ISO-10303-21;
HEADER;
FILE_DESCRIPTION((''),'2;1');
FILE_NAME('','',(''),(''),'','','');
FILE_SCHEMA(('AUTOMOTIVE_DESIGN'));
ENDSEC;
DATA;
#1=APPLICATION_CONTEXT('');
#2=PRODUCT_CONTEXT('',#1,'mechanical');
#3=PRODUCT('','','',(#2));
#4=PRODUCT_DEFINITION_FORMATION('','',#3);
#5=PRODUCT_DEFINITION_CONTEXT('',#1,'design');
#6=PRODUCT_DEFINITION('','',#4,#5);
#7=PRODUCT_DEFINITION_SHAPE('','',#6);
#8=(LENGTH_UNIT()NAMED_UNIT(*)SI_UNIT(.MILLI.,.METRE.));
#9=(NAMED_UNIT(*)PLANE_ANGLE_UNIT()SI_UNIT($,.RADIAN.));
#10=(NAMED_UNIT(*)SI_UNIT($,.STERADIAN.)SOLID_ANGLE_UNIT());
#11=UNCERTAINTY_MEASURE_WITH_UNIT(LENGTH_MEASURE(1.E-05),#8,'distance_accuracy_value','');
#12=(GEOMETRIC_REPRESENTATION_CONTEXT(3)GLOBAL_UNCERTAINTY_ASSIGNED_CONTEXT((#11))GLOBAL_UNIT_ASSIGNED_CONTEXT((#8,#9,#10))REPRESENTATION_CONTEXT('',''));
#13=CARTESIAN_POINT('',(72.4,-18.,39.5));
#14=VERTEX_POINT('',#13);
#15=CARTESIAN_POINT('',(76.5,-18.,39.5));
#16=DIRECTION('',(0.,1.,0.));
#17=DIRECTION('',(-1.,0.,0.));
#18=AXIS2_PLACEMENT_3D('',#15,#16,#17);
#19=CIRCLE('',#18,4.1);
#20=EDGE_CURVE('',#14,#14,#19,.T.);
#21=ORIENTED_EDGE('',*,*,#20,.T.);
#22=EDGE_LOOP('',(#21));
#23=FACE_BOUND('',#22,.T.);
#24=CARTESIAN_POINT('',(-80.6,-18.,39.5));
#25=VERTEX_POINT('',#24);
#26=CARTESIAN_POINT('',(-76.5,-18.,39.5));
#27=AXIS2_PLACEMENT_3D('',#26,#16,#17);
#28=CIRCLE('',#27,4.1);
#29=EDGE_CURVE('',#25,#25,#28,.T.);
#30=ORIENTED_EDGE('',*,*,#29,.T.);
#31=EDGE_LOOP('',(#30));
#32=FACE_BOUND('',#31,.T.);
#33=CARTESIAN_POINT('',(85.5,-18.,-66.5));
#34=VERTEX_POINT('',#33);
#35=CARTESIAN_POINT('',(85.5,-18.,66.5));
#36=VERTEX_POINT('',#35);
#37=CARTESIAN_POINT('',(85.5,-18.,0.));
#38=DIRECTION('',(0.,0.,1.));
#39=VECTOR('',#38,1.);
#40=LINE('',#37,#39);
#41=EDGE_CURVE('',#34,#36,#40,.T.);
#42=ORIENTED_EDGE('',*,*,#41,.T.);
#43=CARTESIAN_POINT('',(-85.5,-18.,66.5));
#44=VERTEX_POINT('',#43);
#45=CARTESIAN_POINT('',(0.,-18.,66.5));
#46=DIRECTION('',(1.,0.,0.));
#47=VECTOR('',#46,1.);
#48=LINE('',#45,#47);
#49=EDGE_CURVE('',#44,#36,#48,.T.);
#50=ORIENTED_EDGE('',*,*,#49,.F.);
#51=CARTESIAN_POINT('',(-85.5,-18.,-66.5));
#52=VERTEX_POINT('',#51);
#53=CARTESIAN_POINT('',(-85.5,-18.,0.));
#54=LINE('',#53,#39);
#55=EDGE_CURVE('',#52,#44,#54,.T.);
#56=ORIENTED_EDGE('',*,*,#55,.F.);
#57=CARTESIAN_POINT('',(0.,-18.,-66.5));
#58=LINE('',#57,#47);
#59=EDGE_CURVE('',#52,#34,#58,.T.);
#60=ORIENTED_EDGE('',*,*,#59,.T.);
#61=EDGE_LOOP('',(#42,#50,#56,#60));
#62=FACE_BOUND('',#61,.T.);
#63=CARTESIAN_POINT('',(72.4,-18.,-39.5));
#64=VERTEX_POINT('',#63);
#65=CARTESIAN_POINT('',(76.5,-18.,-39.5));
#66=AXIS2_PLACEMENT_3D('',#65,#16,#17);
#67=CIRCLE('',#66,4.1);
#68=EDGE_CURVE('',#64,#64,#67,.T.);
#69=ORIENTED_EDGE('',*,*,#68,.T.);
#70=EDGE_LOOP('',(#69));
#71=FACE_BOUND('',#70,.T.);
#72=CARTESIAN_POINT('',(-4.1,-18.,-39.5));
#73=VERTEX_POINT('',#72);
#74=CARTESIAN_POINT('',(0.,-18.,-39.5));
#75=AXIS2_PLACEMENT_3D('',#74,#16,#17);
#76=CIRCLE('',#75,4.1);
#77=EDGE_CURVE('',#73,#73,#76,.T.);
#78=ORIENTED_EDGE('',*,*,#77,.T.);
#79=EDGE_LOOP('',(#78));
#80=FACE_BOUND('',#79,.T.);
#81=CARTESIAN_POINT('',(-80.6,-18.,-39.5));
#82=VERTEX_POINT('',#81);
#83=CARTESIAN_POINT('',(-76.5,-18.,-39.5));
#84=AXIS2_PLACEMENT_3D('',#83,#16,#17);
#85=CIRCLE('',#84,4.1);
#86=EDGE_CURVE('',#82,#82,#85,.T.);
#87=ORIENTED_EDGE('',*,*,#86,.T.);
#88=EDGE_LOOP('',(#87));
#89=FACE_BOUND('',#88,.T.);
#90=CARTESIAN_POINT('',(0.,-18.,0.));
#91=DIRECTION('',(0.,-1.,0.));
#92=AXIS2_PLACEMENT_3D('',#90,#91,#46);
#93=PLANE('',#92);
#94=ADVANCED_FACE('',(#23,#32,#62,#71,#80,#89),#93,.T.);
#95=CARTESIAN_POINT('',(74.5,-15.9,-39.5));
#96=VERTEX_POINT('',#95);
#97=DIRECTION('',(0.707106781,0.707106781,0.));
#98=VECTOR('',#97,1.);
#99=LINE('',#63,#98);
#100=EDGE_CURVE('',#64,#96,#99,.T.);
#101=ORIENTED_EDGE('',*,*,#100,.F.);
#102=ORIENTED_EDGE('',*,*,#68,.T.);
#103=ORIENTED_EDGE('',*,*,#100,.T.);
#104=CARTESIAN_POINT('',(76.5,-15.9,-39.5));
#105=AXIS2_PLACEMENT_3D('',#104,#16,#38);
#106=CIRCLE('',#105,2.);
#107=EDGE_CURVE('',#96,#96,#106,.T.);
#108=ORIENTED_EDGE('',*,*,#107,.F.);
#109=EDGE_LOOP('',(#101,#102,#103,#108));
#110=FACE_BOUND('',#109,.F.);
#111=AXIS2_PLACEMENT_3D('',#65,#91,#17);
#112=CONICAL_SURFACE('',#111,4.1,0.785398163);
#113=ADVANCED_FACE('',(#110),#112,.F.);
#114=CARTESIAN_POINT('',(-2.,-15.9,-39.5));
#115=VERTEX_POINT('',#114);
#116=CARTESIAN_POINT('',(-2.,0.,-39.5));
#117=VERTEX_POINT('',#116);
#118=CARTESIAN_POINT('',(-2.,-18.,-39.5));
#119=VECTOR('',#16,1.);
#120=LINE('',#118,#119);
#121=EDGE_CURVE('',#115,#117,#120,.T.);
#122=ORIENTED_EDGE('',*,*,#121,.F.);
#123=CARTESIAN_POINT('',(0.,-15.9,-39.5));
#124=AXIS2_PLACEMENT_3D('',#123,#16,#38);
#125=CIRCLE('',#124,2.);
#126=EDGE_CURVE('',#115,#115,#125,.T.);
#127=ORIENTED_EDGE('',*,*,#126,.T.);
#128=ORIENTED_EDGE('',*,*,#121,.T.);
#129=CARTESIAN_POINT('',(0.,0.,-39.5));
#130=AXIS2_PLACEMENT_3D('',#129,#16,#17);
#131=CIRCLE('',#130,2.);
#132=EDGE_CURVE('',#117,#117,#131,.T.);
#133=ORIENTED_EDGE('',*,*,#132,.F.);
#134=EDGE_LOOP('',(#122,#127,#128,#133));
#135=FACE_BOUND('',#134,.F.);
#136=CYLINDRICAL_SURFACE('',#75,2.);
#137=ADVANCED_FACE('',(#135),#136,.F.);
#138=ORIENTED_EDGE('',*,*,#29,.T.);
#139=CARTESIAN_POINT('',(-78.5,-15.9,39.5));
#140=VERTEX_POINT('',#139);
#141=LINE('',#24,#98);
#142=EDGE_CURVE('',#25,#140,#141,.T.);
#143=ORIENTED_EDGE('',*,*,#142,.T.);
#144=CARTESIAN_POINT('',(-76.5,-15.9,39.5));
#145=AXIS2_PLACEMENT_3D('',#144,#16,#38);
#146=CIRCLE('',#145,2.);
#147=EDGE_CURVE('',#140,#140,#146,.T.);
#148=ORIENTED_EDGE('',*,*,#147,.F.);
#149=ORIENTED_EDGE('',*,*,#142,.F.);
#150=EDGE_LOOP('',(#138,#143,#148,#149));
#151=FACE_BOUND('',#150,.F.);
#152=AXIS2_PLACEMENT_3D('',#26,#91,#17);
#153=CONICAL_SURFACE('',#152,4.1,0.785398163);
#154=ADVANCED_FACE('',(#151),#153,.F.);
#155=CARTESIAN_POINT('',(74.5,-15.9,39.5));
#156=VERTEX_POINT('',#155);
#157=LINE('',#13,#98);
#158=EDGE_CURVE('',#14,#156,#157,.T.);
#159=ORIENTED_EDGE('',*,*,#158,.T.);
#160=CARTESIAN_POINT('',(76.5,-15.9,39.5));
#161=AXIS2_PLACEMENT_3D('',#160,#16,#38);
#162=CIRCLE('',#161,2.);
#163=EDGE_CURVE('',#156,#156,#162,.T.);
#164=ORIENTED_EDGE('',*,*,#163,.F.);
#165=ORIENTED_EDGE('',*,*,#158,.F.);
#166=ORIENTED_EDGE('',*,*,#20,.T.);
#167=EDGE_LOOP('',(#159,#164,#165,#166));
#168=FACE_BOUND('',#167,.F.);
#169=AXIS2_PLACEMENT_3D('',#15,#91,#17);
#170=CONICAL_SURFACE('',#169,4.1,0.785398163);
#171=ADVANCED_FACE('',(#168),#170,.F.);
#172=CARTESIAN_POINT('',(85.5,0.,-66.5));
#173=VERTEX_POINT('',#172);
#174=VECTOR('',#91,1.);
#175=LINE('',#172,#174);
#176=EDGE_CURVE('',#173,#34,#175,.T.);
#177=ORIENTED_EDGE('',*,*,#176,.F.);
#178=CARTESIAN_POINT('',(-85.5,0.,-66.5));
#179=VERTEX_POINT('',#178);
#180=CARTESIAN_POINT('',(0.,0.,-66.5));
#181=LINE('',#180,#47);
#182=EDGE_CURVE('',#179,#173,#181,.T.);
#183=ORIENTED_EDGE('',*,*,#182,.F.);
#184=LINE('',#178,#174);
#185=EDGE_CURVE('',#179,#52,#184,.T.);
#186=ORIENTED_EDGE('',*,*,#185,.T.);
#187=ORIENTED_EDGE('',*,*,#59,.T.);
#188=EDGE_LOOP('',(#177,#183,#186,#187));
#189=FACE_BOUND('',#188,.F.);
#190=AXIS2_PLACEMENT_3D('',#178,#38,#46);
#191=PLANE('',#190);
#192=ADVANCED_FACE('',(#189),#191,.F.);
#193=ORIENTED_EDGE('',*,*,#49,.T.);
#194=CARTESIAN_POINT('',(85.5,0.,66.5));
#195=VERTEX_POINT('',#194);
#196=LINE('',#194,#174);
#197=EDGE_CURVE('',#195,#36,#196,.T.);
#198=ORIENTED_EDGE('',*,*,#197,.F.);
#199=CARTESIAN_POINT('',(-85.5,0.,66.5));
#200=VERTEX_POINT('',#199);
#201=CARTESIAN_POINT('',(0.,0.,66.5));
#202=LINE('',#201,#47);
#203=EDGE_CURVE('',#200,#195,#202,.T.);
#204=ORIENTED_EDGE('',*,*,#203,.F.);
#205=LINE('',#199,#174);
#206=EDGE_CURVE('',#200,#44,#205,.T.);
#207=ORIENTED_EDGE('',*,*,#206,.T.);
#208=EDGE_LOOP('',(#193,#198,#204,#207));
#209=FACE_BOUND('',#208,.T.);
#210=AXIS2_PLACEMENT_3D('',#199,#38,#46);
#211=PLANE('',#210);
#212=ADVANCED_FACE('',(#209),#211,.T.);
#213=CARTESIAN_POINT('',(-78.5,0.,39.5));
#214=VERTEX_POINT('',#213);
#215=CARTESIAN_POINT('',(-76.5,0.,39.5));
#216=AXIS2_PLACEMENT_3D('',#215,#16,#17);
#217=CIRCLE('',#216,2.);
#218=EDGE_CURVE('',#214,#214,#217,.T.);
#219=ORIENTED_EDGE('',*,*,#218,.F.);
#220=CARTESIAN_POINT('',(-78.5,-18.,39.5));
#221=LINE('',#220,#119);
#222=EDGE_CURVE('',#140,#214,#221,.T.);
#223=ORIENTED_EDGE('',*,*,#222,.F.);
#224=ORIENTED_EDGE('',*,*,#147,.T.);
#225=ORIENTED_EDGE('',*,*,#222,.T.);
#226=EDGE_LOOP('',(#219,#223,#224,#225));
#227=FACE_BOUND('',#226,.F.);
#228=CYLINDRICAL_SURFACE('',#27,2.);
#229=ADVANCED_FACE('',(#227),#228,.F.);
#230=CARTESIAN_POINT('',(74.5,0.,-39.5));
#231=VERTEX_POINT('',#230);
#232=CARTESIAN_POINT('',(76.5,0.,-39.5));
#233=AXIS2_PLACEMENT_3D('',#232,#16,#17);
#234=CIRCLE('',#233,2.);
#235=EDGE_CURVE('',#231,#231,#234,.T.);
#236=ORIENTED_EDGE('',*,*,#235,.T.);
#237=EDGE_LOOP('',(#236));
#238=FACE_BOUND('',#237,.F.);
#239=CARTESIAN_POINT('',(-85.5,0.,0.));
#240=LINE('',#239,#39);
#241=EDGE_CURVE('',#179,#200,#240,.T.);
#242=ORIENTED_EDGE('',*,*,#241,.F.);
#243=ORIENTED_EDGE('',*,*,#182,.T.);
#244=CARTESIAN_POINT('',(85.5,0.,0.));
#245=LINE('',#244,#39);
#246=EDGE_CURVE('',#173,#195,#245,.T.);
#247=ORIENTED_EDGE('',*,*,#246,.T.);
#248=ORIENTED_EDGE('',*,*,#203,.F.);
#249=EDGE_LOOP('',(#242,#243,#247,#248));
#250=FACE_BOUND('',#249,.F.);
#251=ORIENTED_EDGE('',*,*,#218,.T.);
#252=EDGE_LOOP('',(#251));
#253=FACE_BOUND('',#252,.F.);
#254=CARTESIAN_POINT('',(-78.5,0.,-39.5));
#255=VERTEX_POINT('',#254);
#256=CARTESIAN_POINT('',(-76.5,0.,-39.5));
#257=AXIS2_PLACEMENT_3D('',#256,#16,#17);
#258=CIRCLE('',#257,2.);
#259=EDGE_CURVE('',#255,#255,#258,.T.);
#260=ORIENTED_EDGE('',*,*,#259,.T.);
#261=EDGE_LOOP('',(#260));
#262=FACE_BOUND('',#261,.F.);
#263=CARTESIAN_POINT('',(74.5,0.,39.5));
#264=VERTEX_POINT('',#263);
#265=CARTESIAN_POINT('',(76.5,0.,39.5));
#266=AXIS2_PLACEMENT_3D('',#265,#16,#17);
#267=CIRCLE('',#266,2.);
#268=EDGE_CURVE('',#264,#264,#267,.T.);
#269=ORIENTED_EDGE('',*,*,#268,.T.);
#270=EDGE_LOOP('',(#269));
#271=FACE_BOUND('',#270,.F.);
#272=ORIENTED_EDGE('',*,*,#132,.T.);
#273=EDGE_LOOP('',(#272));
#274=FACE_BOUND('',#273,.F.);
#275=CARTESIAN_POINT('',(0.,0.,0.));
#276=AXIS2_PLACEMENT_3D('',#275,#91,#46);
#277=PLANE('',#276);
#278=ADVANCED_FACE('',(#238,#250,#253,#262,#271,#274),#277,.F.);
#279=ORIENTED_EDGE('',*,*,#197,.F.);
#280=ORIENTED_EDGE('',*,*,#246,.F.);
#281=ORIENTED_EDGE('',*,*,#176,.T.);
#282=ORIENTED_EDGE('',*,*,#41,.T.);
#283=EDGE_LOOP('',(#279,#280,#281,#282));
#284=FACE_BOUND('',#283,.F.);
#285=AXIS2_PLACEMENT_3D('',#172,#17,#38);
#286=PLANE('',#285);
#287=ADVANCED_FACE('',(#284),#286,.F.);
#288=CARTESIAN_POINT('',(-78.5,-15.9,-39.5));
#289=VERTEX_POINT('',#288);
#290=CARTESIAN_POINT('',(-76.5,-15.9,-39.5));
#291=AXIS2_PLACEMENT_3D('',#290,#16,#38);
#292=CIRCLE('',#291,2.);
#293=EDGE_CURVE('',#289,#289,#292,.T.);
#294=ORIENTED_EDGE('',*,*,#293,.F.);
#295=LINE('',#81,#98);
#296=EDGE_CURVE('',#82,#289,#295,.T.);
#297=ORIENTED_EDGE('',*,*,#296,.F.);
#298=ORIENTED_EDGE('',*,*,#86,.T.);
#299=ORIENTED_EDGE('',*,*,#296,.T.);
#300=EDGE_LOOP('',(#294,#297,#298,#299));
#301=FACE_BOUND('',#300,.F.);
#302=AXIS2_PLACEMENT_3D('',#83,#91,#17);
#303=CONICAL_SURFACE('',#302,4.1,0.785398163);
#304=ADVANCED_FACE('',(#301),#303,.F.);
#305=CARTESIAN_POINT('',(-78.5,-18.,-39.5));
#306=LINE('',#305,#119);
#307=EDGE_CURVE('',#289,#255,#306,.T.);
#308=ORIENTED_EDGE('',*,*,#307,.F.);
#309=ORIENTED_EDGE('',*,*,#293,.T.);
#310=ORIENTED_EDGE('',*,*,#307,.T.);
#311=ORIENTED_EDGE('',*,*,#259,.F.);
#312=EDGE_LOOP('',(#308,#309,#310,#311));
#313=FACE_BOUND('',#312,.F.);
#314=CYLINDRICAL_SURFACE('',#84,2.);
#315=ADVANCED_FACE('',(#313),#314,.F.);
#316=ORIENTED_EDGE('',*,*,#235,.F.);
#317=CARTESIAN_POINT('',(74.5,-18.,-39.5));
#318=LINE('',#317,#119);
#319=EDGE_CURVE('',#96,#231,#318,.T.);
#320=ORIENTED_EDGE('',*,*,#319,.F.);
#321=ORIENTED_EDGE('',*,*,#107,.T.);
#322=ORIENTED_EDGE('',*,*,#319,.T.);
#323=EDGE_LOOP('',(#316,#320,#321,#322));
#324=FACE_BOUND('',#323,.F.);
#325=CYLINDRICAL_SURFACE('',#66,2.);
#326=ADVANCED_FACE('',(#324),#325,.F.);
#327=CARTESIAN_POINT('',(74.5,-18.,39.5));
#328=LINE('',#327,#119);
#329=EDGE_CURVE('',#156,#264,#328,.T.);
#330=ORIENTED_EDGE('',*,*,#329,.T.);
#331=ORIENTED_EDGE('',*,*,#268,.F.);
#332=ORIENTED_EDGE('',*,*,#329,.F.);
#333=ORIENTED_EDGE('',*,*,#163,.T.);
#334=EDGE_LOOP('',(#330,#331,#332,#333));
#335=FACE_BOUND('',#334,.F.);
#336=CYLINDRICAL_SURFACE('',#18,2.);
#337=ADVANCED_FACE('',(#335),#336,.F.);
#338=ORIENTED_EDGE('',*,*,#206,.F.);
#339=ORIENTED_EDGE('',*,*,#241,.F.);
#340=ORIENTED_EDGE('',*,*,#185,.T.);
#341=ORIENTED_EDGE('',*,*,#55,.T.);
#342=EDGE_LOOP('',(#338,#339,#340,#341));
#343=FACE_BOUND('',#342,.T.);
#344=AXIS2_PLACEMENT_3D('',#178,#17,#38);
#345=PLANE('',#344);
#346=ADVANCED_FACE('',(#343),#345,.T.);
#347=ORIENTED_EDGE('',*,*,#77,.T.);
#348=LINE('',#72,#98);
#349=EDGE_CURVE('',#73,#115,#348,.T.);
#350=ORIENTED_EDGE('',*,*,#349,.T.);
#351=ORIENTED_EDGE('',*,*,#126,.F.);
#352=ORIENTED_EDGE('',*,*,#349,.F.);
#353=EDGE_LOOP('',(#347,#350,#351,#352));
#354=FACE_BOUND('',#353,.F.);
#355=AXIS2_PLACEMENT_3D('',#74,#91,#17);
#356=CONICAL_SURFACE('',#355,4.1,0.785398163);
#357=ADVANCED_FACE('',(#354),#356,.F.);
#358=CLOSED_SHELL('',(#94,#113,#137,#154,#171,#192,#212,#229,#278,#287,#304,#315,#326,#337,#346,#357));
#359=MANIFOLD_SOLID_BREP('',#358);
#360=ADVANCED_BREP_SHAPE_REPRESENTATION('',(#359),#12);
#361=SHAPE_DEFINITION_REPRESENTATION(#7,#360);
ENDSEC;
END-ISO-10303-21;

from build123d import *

# Parameters (mm, degrees)
F0_W           = 171
F0_H           = 133
F1_DEPTH       = 18
F4_D           = 4
F4_CSINK_D     = 8.2
F4_CSINK_ANGLE = 90
F5_D           = 4
F5_CSINK_D     = 8.2
F5_CSINK_ANGLE = 90
F7_D           = 4
F7_CSINK_D     = 8.2
F7_CSINK_ANGLE = 90


# Not quite as in the source:
# - a feature of the source that left no trace in its solid (it failed there, or was rolled back) is left out


with BuildPart() as f1:
    # F0 (on Front) → F1 (new body)
    with BuildSketch(Plane.XZ):
        Rectangle(F0_W, F0_H)
    extrude(amount=F1_DEPTH)

    # F4 (through all)
    with Locations(Plane.XZ.offset(18)):
        with Locations((0, -39.5)):
            CounterSinkHole(F4_D / 2, F4_CSINK_D / 2, counter_sink_angle=F4_CSINK_ANGLE)

    # F5 (through all)
    with Locations(Plane.XZ.offset(18)):
        with Locations((-76.5, -39.5), (76.5, -39.5)):
            CounterSinkHole(F5_D / 2, F5_CSINK_D / 2, counter_sink_angle=F5_CSINK_ANGLE)

    # F7 (through all)
    with Locations(Plane.XZ.offset(18)):
        with Locations((-76.5, 39.5), (76.5, 39.5)):
            CounterSinkHole(F7_D / 2, F7_CSINK_D / 2, counter_sink_angle=F7_CSINK_ANGLE)


solid = f1.part
